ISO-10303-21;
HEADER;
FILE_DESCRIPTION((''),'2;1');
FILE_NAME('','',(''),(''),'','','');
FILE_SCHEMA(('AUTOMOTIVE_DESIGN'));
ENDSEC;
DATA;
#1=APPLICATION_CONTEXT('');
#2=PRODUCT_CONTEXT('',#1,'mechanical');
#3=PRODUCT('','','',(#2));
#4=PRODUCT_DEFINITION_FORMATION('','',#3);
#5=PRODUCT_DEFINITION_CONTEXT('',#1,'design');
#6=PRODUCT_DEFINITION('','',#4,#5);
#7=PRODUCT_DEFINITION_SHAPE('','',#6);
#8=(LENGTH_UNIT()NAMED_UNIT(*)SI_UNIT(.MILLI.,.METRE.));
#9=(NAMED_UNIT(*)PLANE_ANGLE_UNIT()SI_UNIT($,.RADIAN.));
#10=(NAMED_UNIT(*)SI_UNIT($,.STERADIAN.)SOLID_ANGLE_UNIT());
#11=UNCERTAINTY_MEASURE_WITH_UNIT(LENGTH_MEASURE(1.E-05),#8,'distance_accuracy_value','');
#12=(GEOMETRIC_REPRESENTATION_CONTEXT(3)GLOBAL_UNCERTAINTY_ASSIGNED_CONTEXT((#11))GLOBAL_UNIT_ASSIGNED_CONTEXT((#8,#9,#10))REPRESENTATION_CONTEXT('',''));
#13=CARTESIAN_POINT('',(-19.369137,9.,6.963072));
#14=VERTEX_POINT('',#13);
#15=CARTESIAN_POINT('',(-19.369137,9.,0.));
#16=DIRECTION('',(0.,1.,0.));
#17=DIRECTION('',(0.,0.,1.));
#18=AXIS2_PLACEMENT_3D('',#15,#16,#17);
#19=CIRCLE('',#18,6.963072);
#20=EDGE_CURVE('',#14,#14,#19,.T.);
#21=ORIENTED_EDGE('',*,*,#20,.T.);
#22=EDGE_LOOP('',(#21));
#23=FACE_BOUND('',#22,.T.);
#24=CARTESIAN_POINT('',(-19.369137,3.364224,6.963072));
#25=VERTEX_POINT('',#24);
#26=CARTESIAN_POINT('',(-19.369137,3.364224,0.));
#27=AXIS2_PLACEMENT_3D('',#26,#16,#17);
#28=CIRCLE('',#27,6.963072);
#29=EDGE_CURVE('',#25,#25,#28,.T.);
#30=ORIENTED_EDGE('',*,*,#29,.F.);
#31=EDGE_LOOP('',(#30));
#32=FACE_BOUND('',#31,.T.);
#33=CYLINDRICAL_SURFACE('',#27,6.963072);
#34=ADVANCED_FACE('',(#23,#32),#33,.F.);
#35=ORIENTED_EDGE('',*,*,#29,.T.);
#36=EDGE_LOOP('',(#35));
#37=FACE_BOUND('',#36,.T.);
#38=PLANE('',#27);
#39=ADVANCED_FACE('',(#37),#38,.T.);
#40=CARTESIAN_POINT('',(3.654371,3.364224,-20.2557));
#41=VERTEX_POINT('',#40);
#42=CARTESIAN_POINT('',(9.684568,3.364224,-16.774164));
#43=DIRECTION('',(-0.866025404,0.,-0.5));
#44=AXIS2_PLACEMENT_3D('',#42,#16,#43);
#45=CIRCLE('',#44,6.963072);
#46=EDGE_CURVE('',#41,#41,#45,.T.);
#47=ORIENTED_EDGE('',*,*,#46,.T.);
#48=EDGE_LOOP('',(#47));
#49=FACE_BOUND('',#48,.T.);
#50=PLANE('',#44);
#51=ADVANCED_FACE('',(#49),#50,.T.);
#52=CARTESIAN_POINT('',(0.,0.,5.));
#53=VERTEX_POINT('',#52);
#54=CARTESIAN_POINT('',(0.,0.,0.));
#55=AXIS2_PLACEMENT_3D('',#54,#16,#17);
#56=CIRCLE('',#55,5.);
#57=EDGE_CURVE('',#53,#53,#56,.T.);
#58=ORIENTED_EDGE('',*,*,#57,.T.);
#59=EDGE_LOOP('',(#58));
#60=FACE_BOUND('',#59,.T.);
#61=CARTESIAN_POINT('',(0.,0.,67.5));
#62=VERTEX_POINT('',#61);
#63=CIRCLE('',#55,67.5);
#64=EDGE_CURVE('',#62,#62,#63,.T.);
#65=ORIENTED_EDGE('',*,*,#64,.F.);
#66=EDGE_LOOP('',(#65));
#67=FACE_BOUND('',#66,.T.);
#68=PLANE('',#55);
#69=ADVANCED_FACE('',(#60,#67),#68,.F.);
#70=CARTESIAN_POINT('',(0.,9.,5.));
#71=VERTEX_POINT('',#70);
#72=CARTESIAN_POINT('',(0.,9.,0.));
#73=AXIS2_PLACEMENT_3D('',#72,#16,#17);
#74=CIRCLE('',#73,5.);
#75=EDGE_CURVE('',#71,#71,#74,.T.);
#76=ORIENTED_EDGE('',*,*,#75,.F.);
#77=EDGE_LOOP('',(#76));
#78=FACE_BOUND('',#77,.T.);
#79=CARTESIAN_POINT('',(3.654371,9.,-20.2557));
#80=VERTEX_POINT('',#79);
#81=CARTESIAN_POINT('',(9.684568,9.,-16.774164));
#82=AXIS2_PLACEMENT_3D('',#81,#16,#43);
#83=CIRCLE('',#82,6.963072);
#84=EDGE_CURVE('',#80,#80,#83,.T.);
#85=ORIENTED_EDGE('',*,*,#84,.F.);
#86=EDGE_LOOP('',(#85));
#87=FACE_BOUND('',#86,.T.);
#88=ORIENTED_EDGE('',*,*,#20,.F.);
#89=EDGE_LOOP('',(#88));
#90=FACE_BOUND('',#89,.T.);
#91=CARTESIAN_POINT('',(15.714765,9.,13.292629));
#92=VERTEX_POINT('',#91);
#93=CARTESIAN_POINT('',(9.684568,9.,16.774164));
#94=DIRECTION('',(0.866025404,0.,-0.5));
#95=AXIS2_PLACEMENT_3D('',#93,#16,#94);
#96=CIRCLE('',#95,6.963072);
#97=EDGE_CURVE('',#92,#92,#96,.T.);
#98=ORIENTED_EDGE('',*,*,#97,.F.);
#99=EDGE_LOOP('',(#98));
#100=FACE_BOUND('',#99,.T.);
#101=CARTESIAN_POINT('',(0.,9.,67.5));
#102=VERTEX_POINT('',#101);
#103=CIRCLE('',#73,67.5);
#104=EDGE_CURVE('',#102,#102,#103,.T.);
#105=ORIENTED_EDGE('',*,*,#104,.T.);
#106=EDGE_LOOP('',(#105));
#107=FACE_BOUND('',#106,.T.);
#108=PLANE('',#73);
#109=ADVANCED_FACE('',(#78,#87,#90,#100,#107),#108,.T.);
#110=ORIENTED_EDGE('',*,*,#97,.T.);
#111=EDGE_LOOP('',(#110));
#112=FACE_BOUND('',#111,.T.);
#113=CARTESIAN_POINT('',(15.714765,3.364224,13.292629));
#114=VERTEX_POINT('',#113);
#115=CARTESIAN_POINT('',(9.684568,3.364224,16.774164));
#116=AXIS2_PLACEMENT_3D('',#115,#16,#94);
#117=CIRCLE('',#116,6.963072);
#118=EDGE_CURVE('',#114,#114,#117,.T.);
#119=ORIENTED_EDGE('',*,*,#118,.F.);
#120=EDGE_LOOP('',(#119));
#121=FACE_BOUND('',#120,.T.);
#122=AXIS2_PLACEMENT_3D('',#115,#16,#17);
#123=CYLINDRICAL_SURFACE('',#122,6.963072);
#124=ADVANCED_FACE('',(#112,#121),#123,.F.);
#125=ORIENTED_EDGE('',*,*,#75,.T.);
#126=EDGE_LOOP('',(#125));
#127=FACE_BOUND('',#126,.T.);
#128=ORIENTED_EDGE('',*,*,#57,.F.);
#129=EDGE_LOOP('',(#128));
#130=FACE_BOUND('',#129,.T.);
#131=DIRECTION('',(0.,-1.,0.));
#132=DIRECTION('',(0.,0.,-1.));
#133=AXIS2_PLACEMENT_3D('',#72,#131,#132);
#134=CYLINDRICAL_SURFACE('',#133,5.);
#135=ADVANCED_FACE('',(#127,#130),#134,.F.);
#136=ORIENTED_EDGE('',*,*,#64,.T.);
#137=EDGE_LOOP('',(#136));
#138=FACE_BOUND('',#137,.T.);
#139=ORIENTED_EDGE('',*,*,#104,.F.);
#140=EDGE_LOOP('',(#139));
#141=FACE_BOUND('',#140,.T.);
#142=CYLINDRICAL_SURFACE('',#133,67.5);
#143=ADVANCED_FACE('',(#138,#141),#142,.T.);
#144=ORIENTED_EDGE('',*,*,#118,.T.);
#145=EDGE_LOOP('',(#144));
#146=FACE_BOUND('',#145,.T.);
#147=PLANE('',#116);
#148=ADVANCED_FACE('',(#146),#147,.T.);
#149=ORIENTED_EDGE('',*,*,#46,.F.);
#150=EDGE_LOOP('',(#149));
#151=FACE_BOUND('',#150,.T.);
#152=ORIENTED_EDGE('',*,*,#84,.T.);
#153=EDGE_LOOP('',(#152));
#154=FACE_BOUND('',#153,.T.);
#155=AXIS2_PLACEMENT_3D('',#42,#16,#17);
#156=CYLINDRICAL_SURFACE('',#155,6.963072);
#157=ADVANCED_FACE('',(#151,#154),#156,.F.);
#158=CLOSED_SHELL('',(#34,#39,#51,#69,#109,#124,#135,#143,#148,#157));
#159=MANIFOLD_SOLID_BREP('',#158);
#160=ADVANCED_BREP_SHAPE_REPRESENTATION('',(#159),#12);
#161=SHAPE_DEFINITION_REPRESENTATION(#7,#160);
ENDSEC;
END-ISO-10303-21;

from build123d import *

# Parameters (mm, degrees)
SKETCH1_R           = 67.5
BOSS_EXTRUDE1_DEPTH = 9
SKETCH2_R           = 5
CUT_EXTRUDE1_DEPTH  = 96.882740887
SKETCH3_R           = 6.963071563
CUT_EXTRUDE2_DEPTH  = 5.635776031
CIRPATTERN1_COUNT   = 3


with BuildPart() as part:
    # Sketch1 → Boss-Extrude1 (new body)
    with BuildSketch(Plane(origin=(0, 0, 0), x_dir=(1, 0, 0), z_dir=(0, 1, 0))):
        Circle(SKETCH1_R)
    extrude(amount=BOSS_EXTRUDE1_DEPTH)

    # Sketch2 → Cut-Extrude1 (cut, through all)
    with BuildSketch(Plane(origin=(0, 0, 0), x_dir=(1, 0, 0), z_dir=(0, 1, 0))):
        Circle(SKETCH2_R)
    extrude(amount=CUT_EXTRUDE1_DEPTH, mode=Mode.SUBTRACT)

    # Sketch3 → Cut-Extrude2 (cut)
    with BuildSketch(Plane(origin=(0, 9, 0), x_dir=(1, 0, 0), z_dir=(0, 1, 0))):
        with Locations((-19.369136598, 0)):
            Circle(SKETCH3_R)
    cut_extrude2 = extrude(amount=-CUT_EXTRUDE2_DEPTH, mode=Mode.SUBTRACT)

    # CirPattern1: Cut-Extrude2 ×3 about axis
    cirpattern1_axis = Axis((0, 0, 0), (0, 1, 0))
    for i in range(1, CIRPATTERN1_COUNT):
        add(cut_extrude2.rotate(cirpattern1_axis, i * 360 / CIRPATTERN1_COUNT), mode=Mode.SUBTRACT)


solid = part.part
